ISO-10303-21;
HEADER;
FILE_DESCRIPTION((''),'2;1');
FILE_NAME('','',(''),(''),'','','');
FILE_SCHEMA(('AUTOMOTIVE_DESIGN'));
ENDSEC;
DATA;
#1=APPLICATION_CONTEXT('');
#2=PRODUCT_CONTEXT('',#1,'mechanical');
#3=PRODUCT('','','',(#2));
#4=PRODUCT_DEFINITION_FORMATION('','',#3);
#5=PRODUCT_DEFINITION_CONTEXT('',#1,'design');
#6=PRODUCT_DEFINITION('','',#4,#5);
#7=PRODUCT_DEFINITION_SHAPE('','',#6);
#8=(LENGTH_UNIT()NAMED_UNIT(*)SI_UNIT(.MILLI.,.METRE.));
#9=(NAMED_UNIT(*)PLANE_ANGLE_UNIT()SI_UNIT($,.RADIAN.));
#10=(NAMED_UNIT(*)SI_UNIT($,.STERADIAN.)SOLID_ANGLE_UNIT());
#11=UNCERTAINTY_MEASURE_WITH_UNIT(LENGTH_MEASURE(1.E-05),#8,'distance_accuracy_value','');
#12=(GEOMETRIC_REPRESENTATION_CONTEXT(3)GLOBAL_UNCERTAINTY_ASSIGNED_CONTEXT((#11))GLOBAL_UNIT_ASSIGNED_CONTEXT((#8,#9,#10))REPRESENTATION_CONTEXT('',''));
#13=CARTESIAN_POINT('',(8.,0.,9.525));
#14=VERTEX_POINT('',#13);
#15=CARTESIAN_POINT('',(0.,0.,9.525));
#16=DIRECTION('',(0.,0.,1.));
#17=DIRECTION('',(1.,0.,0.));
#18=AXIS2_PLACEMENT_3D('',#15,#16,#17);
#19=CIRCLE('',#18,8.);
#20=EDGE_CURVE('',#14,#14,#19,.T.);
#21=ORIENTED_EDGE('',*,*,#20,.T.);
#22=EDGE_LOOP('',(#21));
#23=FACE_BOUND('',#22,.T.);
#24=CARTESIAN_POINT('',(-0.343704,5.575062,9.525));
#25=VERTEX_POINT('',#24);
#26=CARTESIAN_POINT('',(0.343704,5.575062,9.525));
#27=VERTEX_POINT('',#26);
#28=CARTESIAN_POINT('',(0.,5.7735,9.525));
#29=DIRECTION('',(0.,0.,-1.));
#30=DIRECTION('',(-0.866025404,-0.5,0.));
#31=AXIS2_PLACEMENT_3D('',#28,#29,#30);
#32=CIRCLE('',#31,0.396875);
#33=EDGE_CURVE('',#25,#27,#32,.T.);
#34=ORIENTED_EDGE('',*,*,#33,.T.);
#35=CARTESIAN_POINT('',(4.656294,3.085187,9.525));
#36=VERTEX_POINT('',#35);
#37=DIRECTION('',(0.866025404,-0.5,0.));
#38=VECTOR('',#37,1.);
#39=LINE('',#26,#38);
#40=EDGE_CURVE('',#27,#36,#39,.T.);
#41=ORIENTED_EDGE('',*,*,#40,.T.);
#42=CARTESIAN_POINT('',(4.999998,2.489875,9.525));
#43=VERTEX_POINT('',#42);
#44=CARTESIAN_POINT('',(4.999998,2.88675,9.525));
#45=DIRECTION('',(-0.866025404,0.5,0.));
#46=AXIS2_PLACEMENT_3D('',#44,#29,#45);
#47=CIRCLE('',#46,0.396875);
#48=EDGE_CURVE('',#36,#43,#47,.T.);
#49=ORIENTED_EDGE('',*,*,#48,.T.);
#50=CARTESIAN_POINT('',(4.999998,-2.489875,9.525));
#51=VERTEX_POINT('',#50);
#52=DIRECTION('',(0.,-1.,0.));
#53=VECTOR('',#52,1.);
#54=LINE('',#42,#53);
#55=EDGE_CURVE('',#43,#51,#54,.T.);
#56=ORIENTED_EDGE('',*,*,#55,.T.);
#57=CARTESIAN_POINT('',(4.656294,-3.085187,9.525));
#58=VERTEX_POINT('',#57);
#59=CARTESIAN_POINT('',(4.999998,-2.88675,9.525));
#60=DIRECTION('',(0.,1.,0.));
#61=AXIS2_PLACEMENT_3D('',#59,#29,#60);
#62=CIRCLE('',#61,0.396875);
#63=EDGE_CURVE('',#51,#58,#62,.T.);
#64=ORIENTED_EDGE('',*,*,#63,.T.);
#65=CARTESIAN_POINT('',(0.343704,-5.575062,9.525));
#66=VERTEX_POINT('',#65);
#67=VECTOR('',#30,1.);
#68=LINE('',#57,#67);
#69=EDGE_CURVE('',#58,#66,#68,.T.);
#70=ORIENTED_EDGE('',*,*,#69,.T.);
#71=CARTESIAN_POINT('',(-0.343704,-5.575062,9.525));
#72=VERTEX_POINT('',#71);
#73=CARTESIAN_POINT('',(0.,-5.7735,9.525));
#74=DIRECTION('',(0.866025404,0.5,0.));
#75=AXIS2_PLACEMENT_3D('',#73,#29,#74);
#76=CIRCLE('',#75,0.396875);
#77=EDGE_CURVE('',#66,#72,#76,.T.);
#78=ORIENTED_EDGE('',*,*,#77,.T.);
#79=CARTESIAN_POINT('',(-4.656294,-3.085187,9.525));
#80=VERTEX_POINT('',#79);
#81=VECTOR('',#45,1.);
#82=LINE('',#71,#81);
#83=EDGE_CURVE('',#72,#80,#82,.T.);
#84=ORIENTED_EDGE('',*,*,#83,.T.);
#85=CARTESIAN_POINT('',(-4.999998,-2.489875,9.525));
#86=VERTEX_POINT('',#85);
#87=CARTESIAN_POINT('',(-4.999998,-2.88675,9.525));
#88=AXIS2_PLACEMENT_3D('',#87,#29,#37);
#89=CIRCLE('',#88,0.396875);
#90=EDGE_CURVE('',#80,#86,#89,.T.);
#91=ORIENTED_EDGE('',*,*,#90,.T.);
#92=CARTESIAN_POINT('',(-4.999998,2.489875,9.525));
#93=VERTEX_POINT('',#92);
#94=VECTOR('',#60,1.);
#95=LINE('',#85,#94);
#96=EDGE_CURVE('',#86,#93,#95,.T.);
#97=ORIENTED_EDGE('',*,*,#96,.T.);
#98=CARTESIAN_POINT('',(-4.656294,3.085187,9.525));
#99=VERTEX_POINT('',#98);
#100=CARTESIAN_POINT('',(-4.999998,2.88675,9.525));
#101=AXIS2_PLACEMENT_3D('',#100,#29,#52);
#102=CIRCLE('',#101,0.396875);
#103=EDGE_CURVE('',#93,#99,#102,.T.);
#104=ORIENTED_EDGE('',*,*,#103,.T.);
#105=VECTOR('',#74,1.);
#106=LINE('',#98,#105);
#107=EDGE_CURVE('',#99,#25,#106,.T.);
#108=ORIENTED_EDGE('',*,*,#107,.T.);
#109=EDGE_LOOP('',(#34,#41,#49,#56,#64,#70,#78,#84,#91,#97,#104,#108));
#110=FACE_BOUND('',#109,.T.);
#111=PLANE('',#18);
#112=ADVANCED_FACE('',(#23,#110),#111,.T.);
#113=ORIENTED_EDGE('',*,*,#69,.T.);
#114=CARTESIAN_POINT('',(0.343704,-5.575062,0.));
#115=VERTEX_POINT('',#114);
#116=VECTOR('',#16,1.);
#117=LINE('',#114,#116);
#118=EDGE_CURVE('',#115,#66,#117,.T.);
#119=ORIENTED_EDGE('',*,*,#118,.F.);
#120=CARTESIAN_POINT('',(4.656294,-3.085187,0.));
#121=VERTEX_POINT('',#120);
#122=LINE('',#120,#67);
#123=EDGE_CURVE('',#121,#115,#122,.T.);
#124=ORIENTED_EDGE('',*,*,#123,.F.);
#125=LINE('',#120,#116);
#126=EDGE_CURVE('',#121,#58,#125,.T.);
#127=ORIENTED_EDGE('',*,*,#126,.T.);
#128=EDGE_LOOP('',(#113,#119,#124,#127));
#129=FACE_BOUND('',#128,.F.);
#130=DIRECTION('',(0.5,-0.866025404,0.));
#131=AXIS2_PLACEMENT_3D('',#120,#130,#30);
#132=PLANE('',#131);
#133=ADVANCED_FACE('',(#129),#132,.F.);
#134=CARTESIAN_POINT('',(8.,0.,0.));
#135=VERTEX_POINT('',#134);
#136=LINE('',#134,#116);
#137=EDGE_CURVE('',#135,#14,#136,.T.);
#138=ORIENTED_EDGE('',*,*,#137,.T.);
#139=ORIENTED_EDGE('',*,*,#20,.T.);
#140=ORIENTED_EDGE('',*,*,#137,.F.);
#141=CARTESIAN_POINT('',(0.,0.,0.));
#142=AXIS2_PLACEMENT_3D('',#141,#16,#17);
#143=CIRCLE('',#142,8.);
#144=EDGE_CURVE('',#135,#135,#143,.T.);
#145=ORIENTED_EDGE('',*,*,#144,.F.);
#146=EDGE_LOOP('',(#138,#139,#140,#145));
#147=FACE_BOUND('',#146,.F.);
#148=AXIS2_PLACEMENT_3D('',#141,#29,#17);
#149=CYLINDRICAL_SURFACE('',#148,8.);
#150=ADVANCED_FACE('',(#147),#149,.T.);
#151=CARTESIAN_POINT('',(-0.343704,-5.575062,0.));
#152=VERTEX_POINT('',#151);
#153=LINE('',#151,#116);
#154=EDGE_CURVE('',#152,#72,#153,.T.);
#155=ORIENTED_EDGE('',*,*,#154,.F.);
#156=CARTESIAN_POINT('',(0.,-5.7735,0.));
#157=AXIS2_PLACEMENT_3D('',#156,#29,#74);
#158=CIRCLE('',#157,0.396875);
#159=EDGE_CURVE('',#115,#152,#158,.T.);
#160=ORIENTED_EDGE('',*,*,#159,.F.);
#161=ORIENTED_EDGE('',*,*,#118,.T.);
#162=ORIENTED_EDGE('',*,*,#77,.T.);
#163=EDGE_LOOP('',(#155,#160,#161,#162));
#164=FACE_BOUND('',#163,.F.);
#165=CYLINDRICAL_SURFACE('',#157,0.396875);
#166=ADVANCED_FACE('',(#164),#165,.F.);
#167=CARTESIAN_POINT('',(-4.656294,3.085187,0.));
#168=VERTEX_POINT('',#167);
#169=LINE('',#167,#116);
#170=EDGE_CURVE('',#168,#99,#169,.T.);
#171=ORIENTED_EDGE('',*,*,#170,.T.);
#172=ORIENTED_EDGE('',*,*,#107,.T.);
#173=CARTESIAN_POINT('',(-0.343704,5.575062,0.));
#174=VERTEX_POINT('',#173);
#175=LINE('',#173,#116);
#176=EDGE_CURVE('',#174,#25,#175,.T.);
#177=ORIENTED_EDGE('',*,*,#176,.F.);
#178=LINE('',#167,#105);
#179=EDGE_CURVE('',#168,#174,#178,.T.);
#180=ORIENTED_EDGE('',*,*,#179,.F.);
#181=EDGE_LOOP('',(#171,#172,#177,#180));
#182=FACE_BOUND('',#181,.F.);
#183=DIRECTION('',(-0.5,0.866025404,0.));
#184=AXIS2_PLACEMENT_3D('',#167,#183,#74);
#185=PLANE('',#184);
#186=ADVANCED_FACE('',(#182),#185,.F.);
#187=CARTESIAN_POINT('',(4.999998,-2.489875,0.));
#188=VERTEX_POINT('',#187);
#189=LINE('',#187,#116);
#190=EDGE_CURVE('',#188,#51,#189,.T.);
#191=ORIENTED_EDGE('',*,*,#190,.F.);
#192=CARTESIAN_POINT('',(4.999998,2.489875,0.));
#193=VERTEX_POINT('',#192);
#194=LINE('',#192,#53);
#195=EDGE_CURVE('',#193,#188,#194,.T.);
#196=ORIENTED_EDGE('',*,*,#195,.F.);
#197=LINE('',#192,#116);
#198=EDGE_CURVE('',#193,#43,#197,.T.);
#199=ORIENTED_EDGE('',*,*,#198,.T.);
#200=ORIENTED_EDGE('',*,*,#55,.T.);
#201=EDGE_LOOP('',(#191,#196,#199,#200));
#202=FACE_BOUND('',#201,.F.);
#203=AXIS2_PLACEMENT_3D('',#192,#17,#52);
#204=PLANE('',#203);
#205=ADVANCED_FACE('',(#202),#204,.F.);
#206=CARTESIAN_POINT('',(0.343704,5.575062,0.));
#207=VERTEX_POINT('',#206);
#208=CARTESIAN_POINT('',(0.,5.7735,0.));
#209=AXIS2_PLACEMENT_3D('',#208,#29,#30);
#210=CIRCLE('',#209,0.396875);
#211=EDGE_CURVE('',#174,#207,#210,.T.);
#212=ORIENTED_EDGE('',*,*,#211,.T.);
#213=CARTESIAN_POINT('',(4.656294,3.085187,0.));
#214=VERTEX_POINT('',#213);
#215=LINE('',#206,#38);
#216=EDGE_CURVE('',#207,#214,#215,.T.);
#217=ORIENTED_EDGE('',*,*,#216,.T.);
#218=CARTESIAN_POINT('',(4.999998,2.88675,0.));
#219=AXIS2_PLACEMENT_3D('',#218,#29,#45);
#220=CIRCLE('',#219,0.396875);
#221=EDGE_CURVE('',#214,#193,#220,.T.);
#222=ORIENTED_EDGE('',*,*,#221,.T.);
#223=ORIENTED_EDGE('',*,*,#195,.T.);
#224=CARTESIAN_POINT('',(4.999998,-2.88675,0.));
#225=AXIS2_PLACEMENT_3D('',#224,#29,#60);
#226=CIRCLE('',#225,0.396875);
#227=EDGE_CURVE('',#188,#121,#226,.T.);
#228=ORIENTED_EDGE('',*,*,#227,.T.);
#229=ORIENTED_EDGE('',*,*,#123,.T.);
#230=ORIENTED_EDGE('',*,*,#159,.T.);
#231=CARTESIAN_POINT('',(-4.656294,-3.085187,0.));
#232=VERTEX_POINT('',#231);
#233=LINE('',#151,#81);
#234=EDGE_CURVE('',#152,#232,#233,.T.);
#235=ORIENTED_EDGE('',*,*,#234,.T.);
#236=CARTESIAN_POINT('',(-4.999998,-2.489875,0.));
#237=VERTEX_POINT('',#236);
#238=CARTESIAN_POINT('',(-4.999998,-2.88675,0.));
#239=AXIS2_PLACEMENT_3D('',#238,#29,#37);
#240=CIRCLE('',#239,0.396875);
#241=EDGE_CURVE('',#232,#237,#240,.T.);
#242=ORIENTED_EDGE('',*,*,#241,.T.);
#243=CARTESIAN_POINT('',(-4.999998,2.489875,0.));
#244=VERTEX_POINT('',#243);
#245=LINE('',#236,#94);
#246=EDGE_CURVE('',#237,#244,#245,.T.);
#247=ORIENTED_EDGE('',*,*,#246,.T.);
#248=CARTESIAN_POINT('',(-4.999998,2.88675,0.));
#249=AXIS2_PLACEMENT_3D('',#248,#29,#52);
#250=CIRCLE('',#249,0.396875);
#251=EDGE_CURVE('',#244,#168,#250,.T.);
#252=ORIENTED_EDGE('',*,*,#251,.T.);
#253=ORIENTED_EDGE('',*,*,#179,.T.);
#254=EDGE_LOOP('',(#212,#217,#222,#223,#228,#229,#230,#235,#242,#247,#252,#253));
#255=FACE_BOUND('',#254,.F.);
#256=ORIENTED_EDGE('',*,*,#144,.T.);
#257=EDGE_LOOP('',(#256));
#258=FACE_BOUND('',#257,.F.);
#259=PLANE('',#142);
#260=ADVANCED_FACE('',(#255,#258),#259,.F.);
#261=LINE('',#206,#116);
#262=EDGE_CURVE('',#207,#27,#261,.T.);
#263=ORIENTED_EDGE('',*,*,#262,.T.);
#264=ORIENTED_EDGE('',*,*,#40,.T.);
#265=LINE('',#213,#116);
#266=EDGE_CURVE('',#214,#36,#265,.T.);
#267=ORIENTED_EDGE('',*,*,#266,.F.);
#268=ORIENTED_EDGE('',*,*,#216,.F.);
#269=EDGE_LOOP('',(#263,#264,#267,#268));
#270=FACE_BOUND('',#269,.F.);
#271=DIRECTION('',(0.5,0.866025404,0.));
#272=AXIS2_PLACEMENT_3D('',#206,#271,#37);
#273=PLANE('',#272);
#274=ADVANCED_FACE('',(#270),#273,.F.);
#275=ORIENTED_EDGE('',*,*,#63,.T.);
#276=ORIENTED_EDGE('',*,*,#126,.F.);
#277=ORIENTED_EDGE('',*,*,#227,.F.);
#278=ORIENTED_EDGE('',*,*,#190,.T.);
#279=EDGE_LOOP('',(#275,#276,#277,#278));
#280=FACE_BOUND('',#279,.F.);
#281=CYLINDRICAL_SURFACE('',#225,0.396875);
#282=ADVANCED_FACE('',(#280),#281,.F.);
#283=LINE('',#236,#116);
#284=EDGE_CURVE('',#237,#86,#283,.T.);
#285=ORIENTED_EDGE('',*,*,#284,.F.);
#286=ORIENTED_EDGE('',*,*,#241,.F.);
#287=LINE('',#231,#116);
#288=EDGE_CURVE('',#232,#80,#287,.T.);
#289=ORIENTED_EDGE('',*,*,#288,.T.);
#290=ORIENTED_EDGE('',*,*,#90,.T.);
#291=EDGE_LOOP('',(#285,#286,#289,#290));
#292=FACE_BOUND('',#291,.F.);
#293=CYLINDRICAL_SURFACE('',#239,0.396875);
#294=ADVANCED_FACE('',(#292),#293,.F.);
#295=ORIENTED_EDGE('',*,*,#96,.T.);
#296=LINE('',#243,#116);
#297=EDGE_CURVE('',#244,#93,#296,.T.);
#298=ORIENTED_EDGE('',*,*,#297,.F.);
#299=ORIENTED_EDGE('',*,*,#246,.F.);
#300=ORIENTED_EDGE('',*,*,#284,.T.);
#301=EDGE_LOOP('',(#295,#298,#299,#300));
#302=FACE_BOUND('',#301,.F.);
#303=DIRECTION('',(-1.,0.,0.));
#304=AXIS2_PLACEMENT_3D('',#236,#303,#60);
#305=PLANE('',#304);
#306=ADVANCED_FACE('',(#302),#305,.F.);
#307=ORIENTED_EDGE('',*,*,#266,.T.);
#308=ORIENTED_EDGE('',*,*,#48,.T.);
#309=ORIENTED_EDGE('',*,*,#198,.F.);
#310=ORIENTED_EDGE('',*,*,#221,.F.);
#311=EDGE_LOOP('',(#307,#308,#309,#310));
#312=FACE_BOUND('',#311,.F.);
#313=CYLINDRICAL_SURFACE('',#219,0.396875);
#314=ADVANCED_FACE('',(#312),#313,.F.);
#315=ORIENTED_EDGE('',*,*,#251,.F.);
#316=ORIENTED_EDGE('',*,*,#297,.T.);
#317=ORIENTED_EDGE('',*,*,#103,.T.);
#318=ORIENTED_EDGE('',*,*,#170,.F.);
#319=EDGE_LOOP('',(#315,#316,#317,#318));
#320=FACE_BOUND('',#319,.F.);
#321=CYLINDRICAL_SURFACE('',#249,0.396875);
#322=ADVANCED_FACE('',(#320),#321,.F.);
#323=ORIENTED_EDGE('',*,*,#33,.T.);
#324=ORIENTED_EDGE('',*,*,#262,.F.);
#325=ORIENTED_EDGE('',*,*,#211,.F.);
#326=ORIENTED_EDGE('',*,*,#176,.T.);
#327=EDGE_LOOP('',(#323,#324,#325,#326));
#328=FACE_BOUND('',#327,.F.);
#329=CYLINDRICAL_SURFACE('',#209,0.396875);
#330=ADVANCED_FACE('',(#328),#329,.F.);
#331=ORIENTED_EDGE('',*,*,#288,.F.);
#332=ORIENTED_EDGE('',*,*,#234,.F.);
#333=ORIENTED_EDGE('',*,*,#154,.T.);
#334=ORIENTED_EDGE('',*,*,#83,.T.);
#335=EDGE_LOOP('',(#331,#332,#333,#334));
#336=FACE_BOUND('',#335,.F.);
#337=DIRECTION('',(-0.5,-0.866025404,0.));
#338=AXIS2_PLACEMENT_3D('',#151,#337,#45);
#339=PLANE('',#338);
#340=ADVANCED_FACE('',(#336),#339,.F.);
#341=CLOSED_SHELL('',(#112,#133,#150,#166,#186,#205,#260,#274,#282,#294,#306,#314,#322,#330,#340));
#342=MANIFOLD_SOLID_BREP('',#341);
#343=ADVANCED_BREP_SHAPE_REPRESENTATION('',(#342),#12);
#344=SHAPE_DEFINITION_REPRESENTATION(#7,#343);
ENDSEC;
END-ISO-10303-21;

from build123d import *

# Parameters (mm, degrees)
F0_R     = 8
F1_DEPTH = 9.525


# Not quite as in the source:
# - a length typed as a fraction of an inch, garbled in the dataset ("3 / 203.2 mm" for 3/8 in), is restored


with BuildPart() as f1:
    # F0 (on Top) → F1 (new body)
    with BuildSketch(Plane.XY):
        Circle(F0_R)
        with BuildLine():
            ThreePointArc((-0.3437038321, 5.5750625), (0, 6.170375), (0.3437038321, 5.5750625))
            Line((0.3437038321, 5.5750625), (4.6562938366, 3.0851875))
            ThreePointArc((4.6562938366, 3.0851875), (5.3437015009, 3.0851875), (4.9999976687, 2.489875))
            Line((4.9999976687, 2.489875), (4.9999976687, -2.489875))
            ThreePointArc((4.9999976687, -2.489875), (5.3437015009, -3.0851875), (4.6562938366, -3.0851875))
            Line((4.6562938366, -3.0851875), (0.3437038321, -5.5750625))
            ThreePointArc((0.3437038321, -5.5750625), (0, -6.170375), (-0.3437038321, -5.5750625))
            Line((-0.3437038321, -5.5750625), (-4.6562938366, -3.0851875))
            ThreePointArc((-4.6562938366, -3.0851875), (-5.3437015009, -3.0851875), (-4.9999976687, -2.489875))
            Line((-4.9999976687, -2.489875), (-4.9999976687, 2.489875))
            ThreePointArc((-4.9999976687, 2.489875), (-5.3437015009, 3.0851875), (-4.6562938366, 3.0851875))
            Line((-4.6562938366, 3.0851875), (-0.3437038321, 5.5750625))
        make_face(mode=Mode.SUBTRACT)
    extrude(amount=F1_DEPTH)


solid = f1.part
